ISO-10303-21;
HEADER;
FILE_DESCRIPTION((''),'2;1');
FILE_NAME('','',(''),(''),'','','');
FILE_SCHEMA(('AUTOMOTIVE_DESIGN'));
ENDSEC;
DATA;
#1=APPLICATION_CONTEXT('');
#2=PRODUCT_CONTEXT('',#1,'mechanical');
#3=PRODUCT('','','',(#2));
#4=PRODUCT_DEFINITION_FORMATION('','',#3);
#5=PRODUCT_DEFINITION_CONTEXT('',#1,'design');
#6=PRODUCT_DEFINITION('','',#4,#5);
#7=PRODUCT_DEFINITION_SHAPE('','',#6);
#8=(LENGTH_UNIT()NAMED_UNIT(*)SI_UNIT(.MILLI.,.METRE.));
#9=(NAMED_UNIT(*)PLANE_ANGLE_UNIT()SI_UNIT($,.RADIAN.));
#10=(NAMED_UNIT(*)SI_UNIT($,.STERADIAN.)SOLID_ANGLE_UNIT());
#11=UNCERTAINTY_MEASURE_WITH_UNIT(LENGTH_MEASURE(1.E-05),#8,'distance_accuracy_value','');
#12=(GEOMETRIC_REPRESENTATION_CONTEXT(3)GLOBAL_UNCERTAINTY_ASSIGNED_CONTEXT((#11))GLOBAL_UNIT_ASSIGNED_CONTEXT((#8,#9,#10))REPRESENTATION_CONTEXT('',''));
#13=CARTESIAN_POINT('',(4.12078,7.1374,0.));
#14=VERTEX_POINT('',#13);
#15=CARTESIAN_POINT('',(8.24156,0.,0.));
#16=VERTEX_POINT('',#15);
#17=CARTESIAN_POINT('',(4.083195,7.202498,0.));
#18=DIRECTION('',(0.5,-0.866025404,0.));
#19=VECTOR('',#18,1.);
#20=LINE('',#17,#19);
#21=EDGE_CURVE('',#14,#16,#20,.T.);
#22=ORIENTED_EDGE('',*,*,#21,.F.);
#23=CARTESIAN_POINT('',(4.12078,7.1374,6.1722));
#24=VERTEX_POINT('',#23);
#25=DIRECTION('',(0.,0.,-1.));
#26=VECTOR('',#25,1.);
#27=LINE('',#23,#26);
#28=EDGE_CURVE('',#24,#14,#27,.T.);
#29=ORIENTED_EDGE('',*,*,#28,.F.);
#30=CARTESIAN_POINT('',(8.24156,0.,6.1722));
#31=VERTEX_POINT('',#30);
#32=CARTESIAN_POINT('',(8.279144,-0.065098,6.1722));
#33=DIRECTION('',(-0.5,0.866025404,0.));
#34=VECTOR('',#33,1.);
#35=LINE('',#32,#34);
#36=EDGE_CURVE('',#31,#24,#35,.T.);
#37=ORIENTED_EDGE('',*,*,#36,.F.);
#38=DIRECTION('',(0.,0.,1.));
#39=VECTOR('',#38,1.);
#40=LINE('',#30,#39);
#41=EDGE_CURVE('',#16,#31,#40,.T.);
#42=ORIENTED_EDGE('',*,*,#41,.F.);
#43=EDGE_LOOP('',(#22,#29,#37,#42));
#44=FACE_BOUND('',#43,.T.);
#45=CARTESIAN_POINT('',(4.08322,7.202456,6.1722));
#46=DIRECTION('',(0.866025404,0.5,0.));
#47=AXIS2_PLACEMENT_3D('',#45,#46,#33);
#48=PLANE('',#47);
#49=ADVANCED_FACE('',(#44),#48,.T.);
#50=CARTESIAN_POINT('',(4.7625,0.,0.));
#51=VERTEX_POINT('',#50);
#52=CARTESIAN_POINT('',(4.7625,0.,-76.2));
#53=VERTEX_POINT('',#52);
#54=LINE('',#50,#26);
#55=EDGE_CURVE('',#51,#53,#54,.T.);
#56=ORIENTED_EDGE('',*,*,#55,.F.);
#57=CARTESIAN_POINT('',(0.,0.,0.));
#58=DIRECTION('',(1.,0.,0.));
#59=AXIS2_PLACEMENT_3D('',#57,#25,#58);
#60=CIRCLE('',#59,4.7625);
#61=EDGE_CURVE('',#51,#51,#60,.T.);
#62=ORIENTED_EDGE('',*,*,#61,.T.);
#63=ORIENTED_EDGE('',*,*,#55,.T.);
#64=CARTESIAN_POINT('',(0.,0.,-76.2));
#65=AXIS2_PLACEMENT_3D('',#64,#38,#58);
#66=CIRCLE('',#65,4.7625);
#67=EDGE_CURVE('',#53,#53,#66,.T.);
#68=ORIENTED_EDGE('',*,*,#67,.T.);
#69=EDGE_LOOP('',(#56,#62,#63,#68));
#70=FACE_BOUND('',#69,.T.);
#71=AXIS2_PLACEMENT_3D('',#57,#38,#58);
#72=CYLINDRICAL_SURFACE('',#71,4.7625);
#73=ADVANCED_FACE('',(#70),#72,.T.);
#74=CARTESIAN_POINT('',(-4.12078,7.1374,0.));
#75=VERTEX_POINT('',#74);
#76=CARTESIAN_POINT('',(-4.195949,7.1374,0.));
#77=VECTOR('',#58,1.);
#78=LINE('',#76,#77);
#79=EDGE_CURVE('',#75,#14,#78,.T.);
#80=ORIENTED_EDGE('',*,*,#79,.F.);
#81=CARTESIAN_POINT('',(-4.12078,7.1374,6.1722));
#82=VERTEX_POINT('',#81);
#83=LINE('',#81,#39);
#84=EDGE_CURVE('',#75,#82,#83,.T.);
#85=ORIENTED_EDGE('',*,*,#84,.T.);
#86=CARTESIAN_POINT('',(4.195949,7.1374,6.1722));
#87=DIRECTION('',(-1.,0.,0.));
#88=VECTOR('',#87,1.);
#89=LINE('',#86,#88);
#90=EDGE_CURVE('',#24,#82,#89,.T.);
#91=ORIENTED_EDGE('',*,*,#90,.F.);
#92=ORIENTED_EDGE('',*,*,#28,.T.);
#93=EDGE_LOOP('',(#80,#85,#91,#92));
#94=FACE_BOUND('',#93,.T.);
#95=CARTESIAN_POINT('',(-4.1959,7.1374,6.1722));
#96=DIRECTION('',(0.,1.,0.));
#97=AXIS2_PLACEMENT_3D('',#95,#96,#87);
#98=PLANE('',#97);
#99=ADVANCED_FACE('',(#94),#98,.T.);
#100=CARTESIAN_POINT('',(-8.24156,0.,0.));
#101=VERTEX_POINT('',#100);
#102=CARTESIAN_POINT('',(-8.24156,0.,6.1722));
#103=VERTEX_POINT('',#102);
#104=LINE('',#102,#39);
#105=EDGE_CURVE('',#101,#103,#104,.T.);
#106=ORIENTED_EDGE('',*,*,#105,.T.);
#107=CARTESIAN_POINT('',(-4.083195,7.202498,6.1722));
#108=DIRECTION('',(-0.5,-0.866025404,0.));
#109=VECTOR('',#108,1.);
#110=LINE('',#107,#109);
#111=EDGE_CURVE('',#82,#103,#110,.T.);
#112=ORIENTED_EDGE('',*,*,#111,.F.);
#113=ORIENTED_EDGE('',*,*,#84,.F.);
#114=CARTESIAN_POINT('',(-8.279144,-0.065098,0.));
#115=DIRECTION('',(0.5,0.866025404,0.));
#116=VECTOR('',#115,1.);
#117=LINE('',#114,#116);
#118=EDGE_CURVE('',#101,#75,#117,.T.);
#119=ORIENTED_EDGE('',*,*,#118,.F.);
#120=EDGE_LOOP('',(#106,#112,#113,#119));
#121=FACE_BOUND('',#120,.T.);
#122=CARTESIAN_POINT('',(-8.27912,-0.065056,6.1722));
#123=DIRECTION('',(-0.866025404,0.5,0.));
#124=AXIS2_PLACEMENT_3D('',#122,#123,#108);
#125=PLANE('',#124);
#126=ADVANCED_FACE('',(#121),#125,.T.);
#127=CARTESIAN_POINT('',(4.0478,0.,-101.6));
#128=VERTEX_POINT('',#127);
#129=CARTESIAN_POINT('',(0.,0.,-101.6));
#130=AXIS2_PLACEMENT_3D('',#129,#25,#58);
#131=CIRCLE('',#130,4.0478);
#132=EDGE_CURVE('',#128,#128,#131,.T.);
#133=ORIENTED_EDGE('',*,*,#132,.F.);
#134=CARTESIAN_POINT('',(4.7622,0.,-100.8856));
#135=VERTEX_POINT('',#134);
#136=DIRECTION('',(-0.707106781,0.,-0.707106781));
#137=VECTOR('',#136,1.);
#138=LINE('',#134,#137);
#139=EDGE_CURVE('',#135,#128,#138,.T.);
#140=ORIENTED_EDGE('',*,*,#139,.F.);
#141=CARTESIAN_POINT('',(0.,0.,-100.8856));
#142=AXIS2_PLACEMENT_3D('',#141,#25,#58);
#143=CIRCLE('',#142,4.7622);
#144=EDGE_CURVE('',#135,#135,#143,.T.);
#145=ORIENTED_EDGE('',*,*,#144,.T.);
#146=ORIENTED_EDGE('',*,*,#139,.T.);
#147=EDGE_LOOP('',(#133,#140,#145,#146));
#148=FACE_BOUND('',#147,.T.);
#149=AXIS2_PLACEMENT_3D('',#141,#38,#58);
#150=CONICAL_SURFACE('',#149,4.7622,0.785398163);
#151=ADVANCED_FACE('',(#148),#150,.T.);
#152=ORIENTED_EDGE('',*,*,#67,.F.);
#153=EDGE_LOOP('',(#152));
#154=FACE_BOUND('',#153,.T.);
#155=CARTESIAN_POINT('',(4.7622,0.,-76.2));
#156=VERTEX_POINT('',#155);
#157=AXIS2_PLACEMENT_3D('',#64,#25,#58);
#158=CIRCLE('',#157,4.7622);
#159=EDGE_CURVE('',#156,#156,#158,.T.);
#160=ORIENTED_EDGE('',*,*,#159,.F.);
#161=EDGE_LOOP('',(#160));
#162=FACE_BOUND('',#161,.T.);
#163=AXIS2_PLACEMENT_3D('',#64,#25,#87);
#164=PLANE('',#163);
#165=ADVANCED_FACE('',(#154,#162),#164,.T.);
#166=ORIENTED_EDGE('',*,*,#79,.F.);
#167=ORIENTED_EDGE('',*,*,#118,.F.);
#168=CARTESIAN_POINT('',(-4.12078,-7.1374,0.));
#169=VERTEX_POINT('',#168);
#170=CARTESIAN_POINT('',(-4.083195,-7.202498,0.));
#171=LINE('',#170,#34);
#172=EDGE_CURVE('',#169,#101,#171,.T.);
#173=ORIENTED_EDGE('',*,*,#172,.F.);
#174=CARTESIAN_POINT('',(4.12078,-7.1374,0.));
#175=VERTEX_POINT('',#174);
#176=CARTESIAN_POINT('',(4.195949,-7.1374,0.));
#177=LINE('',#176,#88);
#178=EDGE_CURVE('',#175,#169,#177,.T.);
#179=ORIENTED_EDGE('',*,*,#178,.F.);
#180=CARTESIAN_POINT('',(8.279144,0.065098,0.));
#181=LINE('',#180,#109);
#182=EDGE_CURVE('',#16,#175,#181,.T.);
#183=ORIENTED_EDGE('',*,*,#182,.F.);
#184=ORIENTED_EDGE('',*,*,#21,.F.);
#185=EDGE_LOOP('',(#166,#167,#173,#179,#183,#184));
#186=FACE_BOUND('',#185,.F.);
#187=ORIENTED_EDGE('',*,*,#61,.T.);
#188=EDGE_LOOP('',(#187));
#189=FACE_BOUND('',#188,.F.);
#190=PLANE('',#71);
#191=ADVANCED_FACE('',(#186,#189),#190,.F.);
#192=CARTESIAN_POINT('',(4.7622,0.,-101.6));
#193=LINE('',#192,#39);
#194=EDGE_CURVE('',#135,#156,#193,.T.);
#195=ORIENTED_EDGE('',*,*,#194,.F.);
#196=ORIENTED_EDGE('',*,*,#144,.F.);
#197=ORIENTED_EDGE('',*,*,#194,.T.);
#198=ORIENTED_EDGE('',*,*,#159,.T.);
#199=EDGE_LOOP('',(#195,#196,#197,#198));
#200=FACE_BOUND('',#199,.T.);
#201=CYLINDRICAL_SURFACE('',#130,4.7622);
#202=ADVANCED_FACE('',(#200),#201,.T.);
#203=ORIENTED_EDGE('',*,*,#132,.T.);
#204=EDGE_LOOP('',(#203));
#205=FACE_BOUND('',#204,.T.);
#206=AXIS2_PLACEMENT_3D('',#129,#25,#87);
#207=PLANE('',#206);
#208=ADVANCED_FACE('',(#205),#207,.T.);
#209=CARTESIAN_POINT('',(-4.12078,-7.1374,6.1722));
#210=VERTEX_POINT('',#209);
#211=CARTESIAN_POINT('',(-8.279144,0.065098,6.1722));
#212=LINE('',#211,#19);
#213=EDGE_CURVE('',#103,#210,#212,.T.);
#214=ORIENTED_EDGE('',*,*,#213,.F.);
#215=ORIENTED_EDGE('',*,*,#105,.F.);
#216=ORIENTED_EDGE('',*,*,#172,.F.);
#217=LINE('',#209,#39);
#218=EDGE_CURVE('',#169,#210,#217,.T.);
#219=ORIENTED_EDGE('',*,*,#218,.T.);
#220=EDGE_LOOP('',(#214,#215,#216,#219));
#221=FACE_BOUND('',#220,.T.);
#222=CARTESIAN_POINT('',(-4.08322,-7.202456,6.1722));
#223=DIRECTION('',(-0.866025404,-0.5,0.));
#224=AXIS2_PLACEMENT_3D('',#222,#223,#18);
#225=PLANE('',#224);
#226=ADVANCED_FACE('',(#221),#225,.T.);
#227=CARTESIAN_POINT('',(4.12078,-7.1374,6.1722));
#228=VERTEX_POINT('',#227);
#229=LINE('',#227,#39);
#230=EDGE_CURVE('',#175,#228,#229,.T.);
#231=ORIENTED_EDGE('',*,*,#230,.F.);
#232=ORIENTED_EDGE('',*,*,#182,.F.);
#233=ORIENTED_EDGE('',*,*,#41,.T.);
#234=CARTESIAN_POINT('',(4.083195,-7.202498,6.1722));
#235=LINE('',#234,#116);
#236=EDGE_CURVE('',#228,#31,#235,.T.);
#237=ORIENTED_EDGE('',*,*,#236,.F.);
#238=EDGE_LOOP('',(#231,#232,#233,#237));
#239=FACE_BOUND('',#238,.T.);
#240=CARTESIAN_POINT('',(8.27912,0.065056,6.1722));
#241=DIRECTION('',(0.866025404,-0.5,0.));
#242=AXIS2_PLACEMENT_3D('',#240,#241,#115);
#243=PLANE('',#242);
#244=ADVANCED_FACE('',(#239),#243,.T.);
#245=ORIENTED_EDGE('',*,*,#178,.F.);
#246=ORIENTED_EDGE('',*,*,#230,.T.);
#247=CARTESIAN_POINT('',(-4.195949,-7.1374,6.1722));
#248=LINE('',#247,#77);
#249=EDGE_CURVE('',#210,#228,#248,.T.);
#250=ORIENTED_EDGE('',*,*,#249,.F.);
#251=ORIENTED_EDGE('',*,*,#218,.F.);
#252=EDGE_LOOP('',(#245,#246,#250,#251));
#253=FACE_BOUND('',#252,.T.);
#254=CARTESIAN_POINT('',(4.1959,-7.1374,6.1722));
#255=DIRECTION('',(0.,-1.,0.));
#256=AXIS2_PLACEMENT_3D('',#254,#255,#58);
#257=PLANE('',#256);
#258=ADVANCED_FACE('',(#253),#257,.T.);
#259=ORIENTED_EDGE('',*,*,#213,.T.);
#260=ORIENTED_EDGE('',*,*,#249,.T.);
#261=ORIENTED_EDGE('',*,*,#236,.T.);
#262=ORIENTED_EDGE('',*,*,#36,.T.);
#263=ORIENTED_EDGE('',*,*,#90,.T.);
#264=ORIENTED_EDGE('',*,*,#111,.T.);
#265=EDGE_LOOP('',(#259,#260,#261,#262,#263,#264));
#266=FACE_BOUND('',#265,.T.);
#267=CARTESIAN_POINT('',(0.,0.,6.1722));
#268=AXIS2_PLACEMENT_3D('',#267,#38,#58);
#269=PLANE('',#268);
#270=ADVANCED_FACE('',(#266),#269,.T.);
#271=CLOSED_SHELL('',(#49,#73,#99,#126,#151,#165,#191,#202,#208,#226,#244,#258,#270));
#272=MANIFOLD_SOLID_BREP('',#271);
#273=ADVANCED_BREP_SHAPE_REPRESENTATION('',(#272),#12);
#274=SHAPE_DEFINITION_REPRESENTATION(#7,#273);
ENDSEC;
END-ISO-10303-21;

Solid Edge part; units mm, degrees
sketch "Sketch1" plane through (0, 0, 0) normal (0, 0, 1) x (1, 0, 0)
  circle A0 centre (0, 0) radius 8.2794
  dimension "D1" = 16.5588
extrude "Protrusion1" add sketch "Sketch1" along normal blind 6.1722
sketch "Sketch2" plane through (0, 0, 0) normal (0, 0, -1) x (1, 0, 0)
  circle A0 centre (0, 0) radius 4.7625
extrude "Protrusion2" add sketch "Sketch2" along normal blind 101.6
sketch "Sketch3" plane through (0, 0, -101.6) normal (0, 0, -1) x (1, 0, 0)
  circle A0 centre (0, 0) radius 4.7622
extrude "Cutout1" cut sketch "Sketch3" against normal blind 25.4 flip side to cut
chamfer "Chamfer_1" distance 0.7144 angle 45 1 edges at (-4.7622, 0, -101.6)
sketch "Sketch4" plane through (0, 0, 6.1722) normal (0, 0, 1) x (1, 0, 0)
  line L0 (-4.1959, 7.1374) -> (4.1959, 7.1374)
  dimension "D1" = 14.2748
extrude "Cutout2" cut sketch "Sketch4" against normal up to next material side at (0, 7.1874, 6.1722)
pattern_circular "Pattern1" count 6 over 360 about axis through (0, 0, 6.1722) along (0, 0, 1) of "Cutout2"
properties part number "24104421"
